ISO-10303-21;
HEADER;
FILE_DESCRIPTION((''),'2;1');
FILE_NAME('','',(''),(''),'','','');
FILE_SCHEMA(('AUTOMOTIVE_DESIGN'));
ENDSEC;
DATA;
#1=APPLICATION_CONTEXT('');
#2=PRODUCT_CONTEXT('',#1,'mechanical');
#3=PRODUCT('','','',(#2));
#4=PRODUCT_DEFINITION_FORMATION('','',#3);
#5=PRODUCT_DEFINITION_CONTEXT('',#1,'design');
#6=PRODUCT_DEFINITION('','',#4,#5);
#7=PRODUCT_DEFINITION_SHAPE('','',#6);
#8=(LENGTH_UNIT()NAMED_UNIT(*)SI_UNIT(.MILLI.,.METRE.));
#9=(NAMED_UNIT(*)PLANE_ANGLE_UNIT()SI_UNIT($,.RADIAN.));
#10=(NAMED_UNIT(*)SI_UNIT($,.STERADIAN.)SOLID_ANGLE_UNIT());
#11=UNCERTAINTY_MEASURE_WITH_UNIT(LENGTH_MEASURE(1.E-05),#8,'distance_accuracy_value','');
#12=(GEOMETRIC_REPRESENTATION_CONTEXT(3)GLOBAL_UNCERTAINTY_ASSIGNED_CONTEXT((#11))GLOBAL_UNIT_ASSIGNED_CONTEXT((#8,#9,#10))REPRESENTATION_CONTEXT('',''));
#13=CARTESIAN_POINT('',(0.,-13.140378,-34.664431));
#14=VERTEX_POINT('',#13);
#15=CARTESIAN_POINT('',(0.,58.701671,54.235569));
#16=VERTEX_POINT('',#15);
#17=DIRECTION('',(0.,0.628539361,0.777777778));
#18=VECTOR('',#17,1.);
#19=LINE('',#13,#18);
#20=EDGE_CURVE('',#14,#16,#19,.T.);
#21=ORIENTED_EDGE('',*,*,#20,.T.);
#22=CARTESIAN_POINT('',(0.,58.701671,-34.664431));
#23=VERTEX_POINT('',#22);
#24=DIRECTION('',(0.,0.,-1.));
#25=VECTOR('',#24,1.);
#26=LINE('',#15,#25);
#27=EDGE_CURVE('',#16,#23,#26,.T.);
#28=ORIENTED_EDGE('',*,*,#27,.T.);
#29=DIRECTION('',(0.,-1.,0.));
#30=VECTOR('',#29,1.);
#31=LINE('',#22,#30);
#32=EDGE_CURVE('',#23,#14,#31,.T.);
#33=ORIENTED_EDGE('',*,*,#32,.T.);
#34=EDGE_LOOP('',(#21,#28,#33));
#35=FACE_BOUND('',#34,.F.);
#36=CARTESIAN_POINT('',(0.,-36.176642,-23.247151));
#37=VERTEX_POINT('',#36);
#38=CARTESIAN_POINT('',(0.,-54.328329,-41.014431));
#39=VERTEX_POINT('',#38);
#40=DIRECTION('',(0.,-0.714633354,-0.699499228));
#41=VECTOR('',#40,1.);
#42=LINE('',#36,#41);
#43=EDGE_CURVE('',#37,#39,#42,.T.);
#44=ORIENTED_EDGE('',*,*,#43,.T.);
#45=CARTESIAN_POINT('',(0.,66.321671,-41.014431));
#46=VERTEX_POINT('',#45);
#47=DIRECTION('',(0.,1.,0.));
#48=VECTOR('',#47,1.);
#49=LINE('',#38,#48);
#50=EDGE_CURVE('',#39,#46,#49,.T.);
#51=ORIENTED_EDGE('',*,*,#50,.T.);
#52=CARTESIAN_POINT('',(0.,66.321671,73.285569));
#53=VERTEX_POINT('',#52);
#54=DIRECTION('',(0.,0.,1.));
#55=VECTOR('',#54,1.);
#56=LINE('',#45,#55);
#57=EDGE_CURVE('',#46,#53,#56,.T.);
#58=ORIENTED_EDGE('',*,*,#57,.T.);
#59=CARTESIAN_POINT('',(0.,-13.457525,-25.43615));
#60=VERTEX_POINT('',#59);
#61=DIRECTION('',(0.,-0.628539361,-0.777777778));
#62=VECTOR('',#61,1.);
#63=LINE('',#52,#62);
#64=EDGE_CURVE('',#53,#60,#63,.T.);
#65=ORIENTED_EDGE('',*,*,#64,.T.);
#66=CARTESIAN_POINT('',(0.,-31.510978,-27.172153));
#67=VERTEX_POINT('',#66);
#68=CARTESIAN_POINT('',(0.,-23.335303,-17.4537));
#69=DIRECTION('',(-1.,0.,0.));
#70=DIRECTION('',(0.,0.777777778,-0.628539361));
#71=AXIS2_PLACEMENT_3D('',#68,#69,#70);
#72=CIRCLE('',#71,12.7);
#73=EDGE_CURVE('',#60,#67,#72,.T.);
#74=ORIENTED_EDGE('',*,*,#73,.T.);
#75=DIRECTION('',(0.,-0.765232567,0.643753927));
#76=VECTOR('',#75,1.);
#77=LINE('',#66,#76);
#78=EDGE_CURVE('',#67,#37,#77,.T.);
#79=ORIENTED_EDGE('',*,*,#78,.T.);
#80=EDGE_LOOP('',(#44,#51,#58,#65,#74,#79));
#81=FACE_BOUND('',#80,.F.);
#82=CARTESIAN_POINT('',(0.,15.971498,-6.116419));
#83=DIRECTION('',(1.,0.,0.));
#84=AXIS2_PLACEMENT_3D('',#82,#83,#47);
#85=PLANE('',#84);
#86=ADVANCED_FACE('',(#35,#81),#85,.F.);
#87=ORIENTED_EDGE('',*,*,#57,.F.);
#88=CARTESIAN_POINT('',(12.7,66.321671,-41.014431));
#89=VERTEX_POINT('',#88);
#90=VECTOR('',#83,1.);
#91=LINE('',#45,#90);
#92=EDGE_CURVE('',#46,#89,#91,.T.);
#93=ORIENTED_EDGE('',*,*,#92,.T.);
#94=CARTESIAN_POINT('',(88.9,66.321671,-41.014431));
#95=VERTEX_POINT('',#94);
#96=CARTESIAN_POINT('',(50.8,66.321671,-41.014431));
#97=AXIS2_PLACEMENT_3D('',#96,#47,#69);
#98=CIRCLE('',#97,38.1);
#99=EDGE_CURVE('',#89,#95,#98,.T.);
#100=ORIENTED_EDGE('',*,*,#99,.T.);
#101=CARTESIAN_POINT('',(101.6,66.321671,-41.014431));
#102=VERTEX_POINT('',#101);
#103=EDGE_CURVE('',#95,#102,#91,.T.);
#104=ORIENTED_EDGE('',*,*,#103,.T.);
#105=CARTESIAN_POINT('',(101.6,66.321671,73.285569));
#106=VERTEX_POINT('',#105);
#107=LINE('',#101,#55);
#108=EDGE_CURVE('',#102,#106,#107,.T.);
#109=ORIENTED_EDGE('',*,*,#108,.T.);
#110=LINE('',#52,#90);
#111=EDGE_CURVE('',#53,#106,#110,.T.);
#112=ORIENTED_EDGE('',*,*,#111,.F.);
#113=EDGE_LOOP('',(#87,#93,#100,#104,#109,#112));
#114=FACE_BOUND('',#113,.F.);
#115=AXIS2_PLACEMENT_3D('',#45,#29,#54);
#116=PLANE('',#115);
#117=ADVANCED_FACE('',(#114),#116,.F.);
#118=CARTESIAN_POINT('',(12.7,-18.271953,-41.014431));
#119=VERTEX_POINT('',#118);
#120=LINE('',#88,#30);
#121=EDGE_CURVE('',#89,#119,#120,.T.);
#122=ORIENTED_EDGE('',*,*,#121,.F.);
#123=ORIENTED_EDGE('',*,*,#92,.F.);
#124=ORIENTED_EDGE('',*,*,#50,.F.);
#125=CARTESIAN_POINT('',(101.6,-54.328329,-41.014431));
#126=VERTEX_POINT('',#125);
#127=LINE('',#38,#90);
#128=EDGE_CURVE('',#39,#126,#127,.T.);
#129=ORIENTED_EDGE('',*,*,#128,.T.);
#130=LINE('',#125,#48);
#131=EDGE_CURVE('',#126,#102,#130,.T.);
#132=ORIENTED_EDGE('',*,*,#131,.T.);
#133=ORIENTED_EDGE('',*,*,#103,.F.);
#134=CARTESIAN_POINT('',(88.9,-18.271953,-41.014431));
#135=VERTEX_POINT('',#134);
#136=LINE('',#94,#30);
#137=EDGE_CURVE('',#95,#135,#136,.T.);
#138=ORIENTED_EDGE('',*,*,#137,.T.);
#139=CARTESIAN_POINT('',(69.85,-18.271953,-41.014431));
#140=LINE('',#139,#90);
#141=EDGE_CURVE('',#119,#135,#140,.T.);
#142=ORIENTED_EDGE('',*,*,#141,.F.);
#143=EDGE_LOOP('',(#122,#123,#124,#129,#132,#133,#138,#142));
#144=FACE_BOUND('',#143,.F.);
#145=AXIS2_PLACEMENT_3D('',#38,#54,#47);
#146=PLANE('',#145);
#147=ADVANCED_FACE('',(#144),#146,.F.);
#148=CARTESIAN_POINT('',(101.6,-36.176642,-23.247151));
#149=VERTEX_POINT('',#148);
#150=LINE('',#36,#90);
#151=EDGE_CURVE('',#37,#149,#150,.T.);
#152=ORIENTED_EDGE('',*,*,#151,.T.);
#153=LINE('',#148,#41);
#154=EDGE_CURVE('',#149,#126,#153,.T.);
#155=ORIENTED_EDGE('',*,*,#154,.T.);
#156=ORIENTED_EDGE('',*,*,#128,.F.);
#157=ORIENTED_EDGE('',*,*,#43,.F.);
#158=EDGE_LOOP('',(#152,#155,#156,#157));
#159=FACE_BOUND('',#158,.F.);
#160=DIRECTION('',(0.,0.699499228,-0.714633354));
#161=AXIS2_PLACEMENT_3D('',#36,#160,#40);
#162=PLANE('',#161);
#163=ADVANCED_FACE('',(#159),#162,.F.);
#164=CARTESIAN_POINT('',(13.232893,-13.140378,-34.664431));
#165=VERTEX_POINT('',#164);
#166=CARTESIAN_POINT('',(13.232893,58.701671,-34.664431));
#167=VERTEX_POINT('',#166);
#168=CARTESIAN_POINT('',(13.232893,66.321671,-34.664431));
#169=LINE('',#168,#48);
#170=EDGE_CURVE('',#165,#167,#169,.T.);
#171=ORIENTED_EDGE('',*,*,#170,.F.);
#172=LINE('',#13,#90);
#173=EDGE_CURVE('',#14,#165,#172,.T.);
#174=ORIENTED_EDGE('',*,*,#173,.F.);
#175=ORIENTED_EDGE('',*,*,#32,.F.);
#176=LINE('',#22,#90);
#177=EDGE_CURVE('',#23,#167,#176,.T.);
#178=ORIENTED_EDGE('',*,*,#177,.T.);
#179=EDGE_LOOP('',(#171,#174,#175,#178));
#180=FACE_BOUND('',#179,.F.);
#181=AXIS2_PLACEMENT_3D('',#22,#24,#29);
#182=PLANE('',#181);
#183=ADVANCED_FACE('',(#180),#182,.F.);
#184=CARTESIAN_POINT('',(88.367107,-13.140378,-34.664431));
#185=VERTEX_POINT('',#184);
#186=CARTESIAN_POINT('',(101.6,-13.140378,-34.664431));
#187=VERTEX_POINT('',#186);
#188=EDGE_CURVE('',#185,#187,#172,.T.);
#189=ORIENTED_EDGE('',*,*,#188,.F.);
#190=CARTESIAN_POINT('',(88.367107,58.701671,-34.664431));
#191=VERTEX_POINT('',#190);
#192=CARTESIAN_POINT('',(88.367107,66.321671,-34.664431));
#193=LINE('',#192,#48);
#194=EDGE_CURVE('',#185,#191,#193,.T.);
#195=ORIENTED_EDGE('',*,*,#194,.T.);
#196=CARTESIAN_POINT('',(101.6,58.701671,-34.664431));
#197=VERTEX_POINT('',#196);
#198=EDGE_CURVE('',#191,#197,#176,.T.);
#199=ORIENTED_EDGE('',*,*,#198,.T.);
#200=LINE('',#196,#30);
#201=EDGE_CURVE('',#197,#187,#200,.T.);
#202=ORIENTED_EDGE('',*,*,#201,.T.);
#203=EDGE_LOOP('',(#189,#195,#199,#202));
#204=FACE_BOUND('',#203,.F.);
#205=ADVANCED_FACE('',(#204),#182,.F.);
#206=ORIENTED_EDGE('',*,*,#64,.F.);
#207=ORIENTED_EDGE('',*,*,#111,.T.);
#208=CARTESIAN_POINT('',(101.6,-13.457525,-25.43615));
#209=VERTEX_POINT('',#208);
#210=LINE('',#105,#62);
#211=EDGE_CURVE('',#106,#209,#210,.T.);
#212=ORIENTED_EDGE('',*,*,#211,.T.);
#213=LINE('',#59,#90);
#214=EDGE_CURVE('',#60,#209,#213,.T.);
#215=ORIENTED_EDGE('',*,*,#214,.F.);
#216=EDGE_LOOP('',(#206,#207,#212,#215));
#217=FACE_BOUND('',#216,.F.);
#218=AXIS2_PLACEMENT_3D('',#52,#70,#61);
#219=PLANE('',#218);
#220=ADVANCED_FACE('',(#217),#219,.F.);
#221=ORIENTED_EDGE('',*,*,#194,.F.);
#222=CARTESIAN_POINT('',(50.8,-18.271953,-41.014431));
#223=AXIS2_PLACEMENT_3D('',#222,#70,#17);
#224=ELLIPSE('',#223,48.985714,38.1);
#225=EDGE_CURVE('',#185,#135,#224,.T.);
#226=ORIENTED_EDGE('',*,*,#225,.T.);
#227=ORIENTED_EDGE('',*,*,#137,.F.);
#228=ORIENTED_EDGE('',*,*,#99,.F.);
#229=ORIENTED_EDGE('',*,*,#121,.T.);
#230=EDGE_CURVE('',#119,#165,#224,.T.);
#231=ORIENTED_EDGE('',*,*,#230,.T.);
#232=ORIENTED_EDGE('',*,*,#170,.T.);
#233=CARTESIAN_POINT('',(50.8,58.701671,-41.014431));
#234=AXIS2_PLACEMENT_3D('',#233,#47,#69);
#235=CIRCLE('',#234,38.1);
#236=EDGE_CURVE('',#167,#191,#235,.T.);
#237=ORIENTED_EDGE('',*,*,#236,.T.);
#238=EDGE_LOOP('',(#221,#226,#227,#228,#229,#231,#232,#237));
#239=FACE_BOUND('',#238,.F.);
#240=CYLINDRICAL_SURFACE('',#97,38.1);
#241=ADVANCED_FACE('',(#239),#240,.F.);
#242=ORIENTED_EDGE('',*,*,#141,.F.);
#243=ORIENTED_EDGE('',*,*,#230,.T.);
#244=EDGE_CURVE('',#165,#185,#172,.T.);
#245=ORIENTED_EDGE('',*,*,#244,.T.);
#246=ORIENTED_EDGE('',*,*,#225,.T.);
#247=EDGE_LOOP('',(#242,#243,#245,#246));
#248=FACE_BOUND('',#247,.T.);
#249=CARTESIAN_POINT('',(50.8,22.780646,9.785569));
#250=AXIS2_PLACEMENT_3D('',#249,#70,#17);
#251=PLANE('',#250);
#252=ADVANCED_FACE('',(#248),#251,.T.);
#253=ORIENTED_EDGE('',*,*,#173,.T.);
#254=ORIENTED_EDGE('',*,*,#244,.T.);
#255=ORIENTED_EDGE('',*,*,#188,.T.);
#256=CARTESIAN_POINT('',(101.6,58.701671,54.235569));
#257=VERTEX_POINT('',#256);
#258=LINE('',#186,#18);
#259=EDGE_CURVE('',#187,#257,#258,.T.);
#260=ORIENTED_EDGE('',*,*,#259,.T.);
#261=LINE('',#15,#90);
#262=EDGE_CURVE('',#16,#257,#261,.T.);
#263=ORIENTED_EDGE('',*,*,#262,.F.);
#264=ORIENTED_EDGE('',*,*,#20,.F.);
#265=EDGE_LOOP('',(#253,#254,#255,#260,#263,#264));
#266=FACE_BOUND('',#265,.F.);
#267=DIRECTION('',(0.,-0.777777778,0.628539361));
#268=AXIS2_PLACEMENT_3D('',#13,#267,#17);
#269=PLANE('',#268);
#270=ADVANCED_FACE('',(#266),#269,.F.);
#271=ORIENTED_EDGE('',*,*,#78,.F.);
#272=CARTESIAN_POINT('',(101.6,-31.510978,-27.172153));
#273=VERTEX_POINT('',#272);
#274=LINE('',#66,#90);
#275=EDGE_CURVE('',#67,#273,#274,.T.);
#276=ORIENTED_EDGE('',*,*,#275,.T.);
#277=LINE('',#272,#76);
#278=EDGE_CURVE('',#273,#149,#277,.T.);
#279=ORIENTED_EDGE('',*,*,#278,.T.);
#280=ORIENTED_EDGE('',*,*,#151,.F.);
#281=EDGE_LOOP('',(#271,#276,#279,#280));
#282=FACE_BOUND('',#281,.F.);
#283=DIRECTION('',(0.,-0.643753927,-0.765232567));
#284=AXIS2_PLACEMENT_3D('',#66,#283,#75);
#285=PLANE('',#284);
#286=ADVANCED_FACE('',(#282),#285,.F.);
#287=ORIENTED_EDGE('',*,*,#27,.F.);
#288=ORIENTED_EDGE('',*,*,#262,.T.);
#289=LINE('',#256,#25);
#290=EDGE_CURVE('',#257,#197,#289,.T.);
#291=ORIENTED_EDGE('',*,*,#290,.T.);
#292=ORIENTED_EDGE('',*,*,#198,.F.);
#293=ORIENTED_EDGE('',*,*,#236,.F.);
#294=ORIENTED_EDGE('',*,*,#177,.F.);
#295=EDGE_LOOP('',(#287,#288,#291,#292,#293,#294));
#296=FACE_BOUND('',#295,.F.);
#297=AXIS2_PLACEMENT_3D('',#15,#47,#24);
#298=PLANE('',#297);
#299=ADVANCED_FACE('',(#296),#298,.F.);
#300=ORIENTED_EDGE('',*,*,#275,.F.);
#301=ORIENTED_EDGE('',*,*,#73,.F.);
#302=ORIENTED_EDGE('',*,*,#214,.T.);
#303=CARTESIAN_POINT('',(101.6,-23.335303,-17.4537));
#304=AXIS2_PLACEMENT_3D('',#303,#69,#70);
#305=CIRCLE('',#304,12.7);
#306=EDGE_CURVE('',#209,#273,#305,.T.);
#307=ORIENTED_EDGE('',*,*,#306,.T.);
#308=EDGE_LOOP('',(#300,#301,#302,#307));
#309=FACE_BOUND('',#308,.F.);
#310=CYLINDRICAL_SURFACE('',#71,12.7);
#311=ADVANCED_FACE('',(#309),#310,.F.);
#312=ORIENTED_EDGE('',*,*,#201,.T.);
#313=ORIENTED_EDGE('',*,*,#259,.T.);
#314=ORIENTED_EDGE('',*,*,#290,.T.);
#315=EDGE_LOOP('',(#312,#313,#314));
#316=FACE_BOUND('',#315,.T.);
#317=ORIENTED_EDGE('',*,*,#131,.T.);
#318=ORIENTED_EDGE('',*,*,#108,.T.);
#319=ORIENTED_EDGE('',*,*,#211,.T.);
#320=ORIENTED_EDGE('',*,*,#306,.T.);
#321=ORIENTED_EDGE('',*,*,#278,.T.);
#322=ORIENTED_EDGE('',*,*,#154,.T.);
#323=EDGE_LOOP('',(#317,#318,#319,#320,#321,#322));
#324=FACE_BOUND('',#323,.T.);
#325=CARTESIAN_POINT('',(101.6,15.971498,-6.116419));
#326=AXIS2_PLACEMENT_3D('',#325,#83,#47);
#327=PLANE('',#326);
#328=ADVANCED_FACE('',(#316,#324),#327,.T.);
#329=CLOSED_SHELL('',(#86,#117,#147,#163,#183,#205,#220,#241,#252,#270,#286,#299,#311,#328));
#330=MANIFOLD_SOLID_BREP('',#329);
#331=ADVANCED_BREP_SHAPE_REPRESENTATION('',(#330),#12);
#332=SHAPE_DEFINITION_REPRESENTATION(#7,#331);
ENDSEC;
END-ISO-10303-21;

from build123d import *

# Parameters (mm, degrees)
F1_DEPTH = 101.6
F3_REACH = 205.8451899427


with BuildPart() as f1:
    # F0 (on Right) → F1 (new body)
    with BuildSketch(Plane.YZ):
        with BuildLine():
            Line((-36.1766421175, -23.2471508509), (-54.3283293044, -41.0144312356))
            Line((-54.3283293044, -41.0144312356), (58.7016706956, -41.0144312356))
            Line((58.7016706956, -41.0144312356), (58.7016706956, -34.6644312356))
            Line((58.7016706956, -34.6644312356), (-13.140378273, -34.6644312356))
            Line((-13.140378273, -34.6644312356), (58.7016706956, 54.2355687644))
            Line((58.7016706956, 54.2355687644), (66.3216706956, 54.2355687644))
            Line((66.3216706956, 54.2355687644), (66.3216706956, 73.2855687644))
            Line((66.3216706956, 73.2855687644), (-13.4575252541, -25.4361495295))
            ThreePointArc((-13.4575252541, -25.4361495295), (-22.1196896865, -30.0953879884), (-31.5109779006, -27.1721532474))
            Line((-31.5109779006, -27.1721532474), (-36.1766421175, -23.2471508509))
        make_face()
        Polygon((58.7016706956, -34.6644312356), (58.7016706956, -41.0144312356), (66.3216706956, -41.0144312356), (66.3216706956, 54.2355687644), (58.7016706956, 54.2355687644), align=None)
    extrude(amount=F1_DEPTH)

    f3_end = Plane(origin=(50.8, 22.7806462113, 9.7855687644), x_dir=(0, 0.6285393611, 0.7777777778), z_dir=(0, 0.7777777778, -0.6285393611))
    # F2 (on face) → F3 (cut, up to a plane its end follows)
    with BuildSketch(Plane(origin=(0, 66.3216706956, 0), x_dir=(-1, 0, 0), z_dir=(0, 1, 0))):
        with BuildLine():
            Line((-88.9, -41.0144312356), (-12.7, -41.0144312356))
            ThreePointArc((-12.7, -41.0144312356), (-50.8, -2.9144312356), (-88.9, -41.0144312356))
        make_face()
    f3_long = extrude(amount=-F3_REACH, mode=Mode.PRIVATE)
    add(split(f3_long, bisect_by=f3_end, keep=Keep.TOP, mode=Mode.PRIVATE), mode=Mode.SUBTRACT)


solid = f1.part
